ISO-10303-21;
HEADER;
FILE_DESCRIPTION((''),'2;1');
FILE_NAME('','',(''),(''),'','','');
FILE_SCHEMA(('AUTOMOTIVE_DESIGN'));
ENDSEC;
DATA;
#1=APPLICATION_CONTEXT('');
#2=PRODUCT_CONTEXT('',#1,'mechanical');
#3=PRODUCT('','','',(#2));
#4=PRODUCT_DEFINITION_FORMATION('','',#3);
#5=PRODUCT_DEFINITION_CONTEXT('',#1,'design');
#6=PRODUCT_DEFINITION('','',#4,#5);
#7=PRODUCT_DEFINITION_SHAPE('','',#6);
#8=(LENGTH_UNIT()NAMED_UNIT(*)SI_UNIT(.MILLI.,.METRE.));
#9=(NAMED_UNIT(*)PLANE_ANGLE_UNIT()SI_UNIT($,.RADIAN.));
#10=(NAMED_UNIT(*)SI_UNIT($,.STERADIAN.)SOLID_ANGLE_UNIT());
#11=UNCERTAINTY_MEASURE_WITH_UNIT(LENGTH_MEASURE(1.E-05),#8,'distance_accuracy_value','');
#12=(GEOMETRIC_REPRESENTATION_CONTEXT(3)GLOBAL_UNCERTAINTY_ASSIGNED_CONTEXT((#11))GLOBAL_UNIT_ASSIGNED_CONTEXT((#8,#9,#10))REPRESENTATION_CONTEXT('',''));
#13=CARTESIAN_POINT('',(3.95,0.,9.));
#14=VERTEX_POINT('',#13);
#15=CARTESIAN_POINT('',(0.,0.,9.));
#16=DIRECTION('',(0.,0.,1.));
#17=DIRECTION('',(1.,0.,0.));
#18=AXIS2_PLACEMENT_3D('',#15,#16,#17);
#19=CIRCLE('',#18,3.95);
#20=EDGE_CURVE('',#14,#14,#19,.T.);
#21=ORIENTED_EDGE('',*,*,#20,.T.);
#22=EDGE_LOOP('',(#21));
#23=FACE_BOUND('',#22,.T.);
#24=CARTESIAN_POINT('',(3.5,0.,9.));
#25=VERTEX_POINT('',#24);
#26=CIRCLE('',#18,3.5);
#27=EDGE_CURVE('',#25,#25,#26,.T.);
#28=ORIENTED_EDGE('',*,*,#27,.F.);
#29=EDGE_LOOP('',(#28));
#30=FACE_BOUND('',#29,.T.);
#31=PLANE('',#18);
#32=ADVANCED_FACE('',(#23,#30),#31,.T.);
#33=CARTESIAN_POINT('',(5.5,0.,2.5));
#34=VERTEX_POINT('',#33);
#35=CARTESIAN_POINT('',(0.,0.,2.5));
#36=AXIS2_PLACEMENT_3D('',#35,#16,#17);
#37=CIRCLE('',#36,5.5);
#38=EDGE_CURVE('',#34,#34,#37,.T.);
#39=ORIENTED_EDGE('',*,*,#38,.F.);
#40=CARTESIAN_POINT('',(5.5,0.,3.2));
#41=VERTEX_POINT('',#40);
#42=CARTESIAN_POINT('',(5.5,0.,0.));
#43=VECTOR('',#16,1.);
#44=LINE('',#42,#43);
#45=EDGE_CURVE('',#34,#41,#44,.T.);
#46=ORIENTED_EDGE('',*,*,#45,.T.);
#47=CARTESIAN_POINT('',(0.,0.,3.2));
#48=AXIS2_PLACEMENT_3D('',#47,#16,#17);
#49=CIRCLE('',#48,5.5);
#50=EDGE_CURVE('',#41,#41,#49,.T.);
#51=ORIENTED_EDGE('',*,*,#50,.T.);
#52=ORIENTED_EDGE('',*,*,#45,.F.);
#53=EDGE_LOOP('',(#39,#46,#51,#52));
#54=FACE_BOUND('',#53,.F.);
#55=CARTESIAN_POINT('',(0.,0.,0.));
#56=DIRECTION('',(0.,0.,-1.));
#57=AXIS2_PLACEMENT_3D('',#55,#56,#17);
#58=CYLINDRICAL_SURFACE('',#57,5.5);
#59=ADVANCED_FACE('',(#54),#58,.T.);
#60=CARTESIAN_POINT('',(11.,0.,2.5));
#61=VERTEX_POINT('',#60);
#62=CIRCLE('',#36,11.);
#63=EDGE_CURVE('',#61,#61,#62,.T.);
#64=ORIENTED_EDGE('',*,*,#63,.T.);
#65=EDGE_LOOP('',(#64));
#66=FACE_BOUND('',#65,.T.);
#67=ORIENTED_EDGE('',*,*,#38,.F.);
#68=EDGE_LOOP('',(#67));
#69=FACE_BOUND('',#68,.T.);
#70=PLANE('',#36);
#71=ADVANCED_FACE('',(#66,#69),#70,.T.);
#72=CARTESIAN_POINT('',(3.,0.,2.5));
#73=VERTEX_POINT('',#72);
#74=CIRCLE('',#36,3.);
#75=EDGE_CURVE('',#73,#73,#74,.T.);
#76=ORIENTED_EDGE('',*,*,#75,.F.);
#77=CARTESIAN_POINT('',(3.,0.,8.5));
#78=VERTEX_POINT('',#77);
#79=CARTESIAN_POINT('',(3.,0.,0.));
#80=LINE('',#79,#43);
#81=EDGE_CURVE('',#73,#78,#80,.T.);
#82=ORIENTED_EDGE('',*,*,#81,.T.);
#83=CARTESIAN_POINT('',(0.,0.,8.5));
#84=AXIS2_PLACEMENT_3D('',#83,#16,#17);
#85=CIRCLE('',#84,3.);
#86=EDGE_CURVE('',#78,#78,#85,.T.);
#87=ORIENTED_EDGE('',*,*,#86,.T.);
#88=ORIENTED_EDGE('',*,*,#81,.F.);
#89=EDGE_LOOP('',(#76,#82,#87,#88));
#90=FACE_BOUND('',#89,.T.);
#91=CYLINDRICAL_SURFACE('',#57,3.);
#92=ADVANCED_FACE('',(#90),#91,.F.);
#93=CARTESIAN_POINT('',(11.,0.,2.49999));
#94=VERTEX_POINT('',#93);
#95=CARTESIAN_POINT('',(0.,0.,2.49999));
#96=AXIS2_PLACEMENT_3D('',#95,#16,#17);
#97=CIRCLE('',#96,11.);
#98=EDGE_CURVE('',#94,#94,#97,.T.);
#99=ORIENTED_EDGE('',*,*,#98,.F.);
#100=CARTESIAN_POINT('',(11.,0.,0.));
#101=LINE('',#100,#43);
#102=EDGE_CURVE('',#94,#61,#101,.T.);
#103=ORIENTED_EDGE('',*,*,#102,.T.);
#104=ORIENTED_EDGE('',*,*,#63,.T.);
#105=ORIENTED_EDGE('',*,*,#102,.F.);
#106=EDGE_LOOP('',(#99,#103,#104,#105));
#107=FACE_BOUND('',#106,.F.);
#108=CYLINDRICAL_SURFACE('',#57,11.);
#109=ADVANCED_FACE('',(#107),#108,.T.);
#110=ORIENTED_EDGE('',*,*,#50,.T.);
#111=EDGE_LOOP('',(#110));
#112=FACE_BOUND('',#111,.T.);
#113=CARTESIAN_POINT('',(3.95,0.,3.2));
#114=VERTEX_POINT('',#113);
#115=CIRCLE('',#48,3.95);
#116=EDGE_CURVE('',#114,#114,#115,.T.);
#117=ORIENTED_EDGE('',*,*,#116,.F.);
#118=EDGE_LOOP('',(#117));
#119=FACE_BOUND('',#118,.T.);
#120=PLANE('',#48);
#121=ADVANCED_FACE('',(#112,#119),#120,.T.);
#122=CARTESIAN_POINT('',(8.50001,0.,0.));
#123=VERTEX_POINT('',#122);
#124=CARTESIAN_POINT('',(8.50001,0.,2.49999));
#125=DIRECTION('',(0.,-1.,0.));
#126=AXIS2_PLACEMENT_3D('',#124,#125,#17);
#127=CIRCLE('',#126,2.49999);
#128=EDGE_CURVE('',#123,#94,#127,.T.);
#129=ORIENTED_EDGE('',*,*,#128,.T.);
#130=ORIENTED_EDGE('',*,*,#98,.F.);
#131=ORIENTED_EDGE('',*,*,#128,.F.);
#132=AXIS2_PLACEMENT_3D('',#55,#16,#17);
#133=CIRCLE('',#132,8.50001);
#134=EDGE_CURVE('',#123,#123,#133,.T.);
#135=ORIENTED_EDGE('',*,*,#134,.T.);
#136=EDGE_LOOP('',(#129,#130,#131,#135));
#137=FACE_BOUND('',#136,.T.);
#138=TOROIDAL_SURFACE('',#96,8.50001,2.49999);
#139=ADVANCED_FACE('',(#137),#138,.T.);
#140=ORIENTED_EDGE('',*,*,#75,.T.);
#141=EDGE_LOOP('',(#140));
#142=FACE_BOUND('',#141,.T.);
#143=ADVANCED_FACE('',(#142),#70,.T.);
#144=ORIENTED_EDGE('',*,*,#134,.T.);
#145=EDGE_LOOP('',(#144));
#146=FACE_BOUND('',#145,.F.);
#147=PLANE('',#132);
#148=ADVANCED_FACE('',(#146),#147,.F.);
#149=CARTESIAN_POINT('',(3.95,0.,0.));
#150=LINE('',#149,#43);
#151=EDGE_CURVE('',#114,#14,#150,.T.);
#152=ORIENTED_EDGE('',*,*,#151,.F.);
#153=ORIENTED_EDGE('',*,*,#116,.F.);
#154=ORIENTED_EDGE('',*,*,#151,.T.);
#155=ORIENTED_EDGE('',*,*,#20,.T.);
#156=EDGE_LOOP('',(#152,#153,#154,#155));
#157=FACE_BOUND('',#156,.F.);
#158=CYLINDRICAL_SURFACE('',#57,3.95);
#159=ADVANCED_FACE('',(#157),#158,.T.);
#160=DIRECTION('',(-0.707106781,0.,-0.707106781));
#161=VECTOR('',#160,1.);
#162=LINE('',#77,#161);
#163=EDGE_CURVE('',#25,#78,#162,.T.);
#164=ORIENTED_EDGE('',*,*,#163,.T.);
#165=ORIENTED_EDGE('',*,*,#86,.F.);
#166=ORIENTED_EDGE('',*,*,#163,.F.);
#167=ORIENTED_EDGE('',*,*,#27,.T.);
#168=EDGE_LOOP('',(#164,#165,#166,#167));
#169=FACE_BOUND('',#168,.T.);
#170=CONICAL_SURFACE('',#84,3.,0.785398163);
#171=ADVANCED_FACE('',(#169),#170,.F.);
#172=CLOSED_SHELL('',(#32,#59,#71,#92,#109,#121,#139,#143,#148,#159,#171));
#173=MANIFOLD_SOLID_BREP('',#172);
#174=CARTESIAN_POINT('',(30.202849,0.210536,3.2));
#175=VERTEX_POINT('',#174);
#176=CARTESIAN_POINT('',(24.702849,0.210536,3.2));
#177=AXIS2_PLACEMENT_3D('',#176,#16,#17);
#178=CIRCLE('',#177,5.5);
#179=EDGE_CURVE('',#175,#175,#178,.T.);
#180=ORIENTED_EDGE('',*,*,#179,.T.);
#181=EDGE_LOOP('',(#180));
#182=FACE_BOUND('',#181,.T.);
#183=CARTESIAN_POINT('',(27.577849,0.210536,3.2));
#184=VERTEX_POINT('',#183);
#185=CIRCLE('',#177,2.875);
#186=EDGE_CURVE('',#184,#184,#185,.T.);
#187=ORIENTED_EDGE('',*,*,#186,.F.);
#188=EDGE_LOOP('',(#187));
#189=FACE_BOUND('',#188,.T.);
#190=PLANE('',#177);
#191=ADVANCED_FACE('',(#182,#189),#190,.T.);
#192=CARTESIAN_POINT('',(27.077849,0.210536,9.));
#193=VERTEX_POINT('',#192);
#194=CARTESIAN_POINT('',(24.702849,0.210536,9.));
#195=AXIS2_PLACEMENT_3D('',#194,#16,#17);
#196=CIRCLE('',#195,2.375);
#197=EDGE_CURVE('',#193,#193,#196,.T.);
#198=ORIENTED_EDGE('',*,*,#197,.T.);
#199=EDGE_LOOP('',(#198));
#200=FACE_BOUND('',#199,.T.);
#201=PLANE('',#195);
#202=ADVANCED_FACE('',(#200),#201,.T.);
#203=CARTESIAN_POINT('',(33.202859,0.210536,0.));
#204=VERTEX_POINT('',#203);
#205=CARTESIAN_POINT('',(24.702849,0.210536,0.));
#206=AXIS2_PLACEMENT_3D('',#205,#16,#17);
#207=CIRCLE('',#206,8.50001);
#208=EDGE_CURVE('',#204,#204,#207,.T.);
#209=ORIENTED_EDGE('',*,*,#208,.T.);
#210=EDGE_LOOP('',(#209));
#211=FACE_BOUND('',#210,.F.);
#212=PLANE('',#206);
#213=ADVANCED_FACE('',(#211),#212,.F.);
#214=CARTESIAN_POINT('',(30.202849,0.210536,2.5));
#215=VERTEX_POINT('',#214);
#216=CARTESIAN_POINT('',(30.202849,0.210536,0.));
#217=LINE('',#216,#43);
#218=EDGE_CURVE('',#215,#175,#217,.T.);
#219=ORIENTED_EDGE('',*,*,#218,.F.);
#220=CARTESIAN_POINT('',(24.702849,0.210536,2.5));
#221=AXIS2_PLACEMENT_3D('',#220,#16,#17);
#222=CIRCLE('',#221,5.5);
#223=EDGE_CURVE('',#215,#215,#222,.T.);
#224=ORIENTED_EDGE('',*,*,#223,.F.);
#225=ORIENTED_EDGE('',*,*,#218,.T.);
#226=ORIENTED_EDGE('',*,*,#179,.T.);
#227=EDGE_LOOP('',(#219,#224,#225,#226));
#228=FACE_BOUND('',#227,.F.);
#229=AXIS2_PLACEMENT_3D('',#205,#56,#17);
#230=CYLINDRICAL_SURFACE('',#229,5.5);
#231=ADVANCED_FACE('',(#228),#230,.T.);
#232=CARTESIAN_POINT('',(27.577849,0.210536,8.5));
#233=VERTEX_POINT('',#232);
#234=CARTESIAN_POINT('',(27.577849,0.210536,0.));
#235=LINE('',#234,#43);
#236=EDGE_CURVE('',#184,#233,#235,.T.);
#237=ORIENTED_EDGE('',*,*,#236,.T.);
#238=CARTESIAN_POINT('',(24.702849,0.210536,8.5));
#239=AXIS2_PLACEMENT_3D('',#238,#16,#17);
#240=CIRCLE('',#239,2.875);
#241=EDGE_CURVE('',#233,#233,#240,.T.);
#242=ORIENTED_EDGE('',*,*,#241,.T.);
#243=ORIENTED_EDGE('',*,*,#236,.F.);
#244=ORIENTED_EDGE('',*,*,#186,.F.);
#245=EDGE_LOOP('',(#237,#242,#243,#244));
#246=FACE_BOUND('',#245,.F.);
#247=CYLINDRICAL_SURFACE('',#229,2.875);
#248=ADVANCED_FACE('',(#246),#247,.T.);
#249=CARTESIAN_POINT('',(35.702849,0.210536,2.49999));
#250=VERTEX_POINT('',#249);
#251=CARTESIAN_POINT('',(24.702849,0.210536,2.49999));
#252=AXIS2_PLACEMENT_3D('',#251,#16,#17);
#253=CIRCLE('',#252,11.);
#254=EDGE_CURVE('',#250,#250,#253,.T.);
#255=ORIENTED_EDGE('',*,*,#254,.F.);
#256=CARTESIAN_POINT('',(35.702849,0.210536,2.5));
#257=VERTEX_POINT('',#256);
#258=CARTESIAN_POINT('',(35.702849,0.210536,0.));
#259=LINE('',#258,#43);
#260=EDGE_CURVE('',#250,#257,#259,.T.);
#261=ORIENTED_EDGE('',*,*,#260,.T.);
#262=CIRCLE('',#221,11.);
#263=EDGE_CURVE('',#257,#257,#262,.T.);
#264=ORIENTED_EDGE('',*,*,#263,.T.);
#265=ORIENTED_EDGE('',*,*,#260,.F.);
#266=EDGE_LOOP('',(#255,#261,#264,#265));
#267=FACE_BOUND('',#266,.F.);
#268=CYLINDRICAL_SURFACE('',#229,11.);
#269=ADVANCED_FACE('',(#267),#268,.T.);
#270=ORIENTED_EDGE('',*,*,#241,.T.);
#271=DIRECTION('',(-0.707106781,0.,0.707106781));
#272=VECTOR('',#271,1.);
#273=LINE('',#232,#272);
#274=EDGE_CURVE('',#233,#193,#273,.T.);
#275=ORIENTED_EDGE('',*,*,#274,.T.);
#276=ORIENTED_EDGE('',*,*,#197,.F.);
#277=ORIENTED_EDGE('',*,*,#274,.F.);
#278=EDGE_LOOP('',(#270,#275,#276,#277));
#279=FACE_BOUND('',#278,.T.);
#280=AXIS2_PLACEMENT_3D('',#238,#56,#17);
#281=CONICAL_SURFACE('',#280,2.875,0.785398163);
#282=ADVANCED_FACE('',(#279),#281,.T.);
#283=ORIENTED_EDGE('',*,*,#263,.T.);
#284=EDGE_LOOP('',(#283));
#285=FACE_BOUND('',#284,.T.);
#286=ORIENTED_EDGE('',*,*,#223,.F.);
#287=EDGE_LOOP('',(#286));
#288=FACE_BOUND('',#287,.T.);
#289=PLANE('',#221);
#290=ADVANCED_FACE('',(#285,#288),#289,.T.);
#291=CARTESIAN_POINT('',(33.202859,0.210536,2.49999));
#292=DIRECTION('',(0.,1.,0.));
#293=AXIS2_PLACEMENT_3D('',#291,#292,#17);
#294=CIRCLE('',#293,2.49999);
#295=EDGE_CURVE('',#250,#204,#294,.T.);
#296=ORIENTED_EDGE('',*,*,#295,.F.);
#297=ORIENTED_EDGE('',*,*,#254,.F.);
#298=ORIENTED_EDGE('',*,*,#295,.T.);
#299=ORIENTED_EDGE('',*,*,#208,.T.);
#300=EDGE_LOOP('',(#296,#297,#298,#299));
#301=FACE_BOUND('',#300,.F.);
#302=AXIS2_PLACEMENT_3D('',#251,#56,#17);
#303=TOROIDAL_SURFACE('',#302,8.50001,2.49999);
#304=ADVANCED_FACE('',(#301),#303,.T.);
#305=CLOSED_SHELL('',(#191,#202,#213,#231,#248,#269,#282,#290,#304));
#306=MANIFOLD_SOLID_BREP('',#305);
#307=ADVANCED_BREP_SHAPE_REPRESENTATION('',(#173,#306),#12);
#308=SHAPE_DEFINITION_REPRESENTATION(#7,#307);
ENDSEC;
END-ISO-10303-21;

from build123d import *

# Parameters (mm, degrees)
F0_R     = 11
F0_R_2   = 5.5
F1_DEPTH = 2.5
F0_R_3   = 3.95
F2_DEPTH = 3.2
F0_R_4   = 3
F3_DEPTH = 9
F4_R     = 2.49999
F5_DEPTH = 2.5
F6_DEPTH = 2.5
F7_DEPTH = 3.2
F0_R_5   = 2.875
F8_DEPTH = 3.2
F9_DEPTH = 9
F10_R    = 2.49999
F11_SIZE = 0.5
F12_SIZE = 0.5


# Not quite as in the source:
# - a fillet or chamfer is up to 0.001 mm smaller than in the source, because OpenCascade refuses the exact size


with BuildPart() as f1:
    # F0 (on Top) → F1 (new body)
    with BuildSketch(Plane.XY):
        Circle(F0_R)
        Circle(F0_R_2, mode=Mode.SUBTRACT)
    extrude(amount=F1_DEPTH)

    # F0 (on Top) → F2 (join)
    with BuildSketch(Plane.XY):
        Circle(F0_R_2)
        Circle(F0_R_3, mode=Mode.SUBTRACT)
    extrude(amount=F2_DEPTH)

    # F0 (on Top) → F3 (join)
    with BuildSketch(Plane.XY):
        Circle(F0_R_3)
        Circle(F0_R_4, mode=Mode.SUBTRACT)
    extrude(amount=F3_DEPTH)

    # F4 (radius 2.5 in the source; OpenCascade refuses exactly that, so slightly less here)
    f4_edges = [f1.edges().sort_by_distance(p)[0] for p in [
        (-11, 0, 0),
    ]]
    fillet(f4_edges, radius=F4_R)

    # F0 (on Top) → F5 (join)
    with BuildSketch(Plane.XY):
        Circle(F0_R_4)
    extrude(amount=F5_DEPTH)

    # F12
    f12_edges = [f1.edges().sort_by_distance(p)[0] for p in [
        (-3, 0, 9),
    ]]
    chamfer(f12_edges, length=F12_SIZE)


with BuildPart() as f6:
    # F0 (on Top) → F6 (new body)
    with BuildSketch(Plane.XY):
        with Locations((24.7028488666, 0.2105356252)):
            Circle(F0_R)
        with Locations((24.7028488666, 0.2105356252)):
            Circle(F0_R_2, mode=Mode.SUBTRACT)
    extrude(amount=F6_DEPTH)

    # F0 (on Top) → F7 (join)
    with BuildSketch(Plane.XY):
        with Locations((24.7028488666, 0.2105356252)):
            Circle(F0_R_2)
        with Locations((24.7028488666, 0.2105356252)):
            Circle(F0_R_3, mode=Mode.SUBTRACT)
    extrude(amount=F7_DEPTH)

    # F0 (on Top) → F8 (join)
    with BuildSketch(Plane.XY):
        with Locations((24.7028488666, 0.2105356252)):
            Circle(F0_R_3)
        with Locations((24.7028488666, 0.2105356252)):
            Circle(F0_R_5, mode=Mode.SUBTRACT)
    extrude(amount=F8_DEPTH)

    # F0 (on Top) → F9 (join)
    with BuildSketch(Plane.XY):
        with Locations((24.7028488666, 0.2105356252)):
            Circle(F0_R_5)
    extrude(amount=F9_DEPTH)

    # F10 (radius 2.5 in the source; OpenCascade refuses exactly that, so slightly less here)
    f10_edges = [f6.edges().sort_by_distance(p)[0] for p in [
        (13.702849, 0.210536, 0),
    ]]
    fillet(f10_edges, radius=F10_R)

    # F11
    f11_edges = [f6.edges().sort_by_distance(p)[0] for p in [
        (21.827849, 0.210536, 9),
    ]]
    chamfer(f11_edges, length=F11_SIZE)


solid = Compound([f1.part, f6.part])
